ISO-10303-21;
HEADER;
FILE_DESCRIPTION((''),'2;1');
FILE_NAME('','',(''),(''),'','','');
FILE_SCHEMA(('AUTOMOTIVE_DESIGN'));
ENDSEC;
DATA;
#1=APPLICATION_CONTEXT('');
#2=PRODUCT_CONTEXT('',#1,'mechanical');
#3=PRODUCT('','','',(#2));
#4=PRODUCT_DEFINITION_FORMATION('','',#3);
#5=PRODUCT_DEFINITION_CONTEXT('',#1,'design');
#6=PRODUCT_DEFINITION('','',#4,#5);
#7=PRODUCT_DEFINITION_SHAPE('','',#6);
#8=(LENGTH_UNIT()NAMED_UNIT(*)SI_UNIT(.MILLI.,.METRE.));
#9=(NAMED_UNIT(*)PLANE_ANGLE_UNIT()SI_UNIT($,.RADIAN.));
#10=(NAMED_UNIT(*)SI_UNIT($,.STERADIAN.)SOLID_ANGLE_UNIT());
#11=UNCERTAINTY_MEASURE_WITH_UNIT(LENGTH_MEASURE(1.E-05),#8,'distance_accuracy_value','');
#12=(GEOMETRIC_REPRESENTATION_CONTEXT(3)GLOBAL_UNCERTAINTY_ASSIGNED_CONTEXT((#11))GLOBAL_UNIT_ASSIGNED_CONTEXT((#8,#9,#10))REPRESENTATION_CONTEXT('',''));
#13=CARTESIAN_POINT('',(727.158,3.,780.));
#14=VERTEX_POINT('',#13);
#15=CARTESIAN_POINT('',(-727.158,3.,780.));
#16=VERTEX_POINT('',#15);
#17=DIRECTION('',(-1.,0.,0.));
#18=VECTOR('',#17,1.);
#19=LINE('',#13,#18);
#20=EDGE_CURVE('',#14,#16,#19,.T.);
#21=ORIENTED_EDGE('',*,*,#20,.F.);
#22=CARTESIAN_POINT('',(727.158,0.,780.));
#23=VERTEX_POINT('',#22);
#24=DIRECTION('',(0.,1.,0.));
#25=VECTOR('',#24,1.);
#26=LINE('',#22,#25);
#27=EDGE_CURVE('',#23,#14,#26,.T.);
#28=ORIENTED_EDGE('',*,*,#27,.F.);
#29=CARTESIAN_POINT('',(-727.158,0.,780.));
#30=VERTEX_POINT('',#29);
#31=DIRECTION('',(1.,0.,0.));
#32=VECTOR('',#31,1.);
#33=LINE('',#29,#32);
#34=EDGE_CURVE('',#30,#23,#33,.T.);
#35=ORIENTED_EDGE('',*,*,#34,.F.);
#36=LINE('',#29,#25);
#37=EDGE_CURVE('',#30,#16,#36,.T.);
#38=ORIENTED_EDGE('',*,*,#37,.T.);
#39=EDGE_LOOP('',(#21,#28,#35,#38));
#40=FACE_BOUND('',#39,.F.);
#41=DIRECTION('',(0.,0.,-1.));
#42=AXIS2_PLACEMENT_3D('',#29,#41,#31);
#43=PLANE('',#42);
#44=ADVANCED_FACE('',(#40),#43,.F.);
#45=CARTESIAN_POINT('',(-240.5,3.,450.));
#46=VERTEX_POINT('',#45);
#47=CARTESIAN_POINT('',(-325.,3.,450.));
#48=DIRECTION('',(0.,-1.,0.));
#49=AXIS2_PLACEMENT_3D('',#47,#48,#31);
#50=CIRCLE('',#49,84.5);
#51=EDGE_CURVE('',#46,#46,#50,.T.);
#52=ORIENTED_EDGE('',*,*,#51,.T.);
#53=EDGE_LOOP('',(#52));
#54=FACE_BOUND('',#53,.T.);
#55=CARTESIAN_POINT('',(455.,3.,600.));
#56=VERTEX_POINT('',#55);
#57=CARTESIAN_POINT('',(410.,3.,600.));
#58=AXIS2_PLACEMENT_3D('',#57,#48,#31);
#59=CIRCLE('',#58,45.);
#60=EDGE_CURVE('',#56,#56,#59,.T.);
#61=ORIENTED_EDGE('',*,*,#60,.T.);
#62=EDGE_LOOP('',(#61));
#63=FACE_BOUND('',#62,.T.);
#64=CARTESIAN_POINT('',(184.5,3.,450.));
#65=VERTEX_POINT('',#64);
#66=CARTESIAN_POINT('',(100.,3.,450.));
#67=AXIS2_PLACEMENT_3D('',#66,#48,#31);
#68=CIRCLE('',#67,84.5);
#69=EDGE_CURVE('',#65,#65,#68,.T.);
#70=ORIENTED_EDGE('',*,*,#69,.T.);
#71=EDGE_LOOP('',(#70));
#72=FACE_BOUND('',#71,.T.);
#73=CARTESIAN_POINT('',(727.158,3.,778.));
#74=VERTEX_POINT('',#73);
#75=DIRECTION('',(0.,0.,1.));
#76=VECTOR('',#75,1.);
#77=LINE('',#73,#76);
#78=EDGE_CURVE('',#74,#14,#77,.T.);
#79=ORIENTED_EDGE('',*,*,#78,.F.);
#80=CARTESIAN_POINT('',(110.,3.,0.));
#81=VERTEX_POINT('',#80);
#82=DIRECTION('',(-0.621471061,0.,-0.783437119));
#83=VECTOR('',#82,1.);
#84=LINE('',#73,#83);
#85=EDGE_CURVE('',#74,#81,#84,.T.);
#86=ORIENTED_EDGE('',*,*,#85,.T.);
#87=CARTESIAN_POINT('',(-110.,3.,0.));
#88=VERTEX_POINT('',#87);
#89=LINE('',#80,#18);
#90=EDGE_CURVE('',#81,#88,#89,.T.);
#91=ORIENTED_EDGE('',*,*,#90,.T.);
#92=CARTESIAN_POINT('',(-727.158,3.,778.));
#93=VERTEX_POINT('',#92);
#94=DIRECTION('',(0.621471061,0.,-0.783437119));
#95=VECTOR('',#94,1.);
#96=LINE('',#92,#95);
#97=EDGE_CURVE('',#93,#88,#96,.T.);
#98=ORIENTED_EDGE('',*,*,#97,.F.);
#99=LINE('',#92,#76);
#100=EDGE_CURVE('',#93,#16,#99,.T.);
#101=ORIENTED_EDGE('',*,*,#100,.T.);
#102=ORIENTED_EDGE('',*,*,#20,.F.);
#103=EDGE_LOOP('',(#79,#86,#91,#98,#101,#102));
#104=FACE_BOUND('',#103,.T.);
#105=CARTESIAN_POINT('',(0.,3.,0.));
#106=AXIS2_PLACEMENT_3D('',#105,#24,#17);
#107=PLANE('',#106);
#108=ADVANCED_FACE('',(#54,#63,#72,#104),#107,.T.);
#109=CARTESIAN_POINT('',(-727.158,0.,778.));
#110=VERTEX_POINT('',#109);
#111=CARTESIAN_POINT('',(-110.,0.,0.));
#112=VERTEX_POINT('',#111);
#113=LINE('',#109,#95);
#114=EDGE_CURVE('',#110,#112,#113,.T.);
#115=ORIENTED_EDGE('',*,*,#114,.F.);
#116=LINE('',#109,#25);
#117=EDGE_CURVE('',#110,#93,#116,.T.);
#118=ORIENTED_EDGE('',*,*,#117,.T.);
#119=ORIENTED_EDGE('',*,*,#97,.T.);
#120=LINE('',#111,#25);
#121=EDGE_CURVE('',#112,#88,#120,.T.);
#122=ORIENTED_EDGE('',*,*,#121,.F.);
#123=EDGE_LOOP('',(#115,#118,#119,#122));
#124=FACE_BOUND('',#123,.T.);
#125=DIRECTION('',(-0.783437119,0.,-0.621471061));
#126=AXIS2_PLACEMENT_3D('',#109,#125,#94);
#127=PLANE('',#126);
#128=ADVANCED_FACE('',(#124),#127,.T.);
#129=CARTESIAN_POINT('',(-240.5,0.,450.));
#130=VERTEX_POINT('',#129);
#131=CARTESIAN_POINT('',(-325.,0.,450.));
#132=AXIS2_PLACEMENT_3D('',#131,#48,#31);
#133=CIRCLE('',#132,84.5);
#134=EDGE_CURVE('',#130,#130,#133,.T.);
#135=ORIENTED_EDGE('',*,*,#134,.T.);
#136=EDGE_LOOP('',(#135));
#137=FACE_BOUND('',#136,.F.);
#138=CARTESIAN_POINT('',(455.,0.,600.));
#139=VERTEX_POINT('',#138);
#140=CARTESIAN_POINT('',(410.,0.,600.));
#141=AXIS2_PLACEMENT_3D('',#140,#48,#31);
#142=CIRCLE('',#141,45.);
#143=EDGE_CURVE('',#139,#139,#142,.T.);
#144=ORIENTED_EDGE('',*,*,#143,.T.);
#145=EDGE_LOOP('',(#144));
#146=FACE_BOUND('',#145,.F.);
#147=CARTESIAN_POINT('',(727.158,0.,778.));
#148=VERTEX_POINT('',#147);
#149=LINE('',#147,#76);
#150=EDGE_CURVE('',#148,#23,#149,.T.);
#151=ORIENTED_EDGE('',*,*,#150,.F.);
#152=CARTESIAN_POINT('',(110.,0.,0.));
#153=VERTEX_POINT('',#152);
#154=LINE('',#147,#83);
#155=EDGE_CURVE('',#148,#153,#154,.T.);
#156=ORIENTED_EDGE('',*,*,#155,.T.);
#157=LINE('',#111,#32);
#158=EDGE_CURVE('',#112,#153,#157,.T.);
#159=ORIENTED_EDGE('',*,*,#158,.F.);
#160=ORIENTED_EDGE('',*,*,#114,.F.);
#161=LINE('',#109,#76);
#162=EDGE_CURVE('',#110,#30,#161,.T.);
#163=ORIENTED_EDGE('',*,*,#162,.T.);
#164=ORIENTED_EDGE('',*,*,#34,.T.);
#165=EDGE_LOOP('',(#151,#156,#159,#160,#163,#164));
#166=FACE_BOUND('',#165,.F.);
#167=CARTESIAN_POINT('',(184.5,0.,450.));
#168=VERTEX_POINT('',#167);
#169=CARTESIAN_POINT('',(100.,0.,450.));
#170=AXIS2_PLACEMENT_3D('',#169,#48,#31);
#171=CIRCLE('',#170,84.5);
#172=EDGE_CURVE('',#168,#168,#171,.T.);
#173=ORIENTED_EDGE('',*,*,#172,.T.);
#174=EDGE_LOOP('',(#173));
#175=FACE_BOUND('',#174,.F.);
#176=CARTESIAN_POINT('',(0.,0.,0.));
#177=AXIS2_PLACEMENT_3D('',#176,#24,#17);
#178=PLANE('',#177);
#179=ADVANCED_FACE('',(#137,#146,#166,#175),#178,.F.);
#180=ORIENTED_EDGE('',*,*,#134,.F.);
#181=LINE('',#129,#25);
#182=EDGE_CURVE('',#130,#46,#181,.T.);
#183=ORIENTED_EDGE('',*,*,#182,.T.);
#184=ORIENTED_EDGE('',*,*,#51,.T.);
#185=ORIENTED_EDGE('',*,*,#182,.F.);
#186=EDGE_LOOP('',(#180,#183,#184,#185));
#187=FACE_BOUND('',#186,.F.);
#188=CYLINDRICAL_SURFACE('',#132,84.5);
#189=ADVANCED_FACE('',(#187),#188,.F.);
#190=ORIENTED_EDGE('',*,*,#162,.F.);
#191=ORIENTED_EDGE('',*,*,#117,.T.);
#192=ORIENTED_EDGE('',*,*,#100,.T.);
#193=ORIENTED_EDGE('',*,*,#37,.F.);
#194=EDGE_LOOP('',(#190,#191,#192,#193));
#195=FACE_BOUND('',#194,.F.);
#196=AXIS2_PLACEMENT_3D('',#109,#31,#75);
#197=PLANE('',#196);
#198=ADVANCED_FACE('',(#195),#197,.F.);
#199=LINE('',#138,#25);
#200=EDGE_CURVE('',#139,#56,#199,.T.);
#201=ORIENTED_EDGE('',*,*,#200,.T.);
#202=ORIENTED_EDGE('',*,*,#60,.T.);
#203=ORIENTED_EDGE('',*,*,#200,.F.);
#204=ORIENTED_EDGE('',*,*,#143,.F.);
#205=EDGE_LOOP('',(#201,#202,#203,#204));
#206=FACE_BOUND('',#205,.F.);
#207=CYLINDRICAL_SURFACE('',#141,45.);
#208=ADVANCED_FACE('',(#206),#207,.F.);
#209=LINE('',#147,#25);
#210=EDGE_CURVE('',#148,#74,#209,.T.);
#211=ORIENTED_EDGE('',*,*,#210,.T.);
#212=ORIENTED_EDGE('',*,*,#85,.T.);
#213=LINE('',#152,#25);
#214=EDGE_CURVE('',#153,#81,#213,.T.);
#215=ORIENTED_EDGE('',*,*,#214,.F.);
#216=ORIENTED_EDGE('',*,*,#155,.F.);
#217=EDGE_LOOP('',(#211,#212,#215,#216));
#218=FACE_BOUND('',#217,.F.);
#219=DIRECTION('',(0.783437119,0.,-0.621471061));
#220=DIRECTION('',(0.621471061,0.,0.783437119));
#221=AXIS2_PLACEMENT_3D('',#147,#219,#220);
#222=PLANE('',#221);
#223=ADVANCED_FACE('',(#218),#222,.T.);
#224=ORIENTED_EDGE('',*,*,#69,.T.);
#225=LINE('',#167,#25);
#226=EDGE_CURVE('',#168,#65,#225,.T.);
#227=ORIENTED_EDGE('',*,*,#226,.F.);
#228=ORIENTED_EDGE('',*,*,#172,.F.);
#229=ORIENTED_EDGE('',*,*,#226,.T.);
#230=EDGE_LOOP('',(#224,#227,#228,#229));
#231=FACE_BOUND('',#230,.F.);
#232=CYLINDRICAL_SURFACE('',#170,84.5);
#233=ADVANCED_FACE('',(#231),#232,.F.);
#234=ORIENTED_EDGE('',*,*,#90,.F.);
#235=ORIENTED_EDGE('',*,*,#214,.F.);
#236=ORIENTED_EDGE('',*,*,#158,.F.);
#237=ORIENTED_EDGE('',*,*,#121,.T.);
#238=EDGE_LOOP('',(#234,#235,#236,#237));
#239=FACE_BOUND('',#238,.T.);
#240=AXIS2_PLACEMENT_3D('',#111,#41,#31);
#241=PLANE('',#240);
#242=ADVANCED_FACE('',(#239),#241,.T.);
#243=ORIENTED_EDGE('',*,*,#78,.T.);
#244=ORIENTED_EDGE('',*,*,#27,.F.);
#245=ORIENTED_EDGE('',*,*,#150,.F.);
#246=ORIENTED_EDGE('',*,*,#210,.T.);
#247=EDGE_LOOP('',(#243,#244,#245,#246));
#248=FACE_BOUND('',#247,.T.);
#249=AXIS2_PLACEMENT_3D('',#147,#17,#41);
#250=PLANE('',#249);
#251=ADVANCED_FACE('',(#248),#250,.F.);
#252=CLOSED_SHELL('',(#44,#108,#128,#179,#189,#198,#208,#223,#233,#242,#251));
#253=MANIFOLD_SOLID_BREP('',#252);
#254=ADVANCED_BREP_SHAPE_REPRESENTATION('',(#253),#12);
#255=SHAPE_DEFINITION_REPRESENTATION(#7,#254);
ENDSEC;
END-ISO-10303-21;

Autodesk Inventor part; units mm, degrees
ref_plane "YZ Plane" through (0, 0, 0) normal (1, 0, 0) x (0, 1, 0)
ref_plane "XZ Plane" through (0, 0, 0) normal (0, 1, 0) x (-1, 0, 0)
ref_plane "XY Plane" through (0, 0, 0) normal (0, 0, 1) x (1, 0, 0)
sketch "Sketch1" plane through (0, 0, 0) normal (0, 1, 0) x (-1, 0, 0)
  line L0 (0, 780) -> (0, 0)
  line L1 (727.158, 778) -> (727.158, 780)
  line L2 (727.158, 780) -> (0, 780)
  line L3 (727.158, 778) -> (110, 0)
  line L4 (110, 0) -> (0, 0)
  point P0 (0, 678)
  dimension "d1" = 727.158
  dimension "d2" = 2
  dimension "d5" = 128.424
  dimension "d6" = 110
  dimension "d9" = 780
extrude "Plate1" add sketch "Sketch1" along normal blind 3
mirror "Mirror1" about plane through (0, 0, 0) normal (1, 0, 0)
sketch "Sketch2" plane through (0, 0, 0) normal (0, -1, 0) x (1, 0, 0)
  line L0 (-110, 0) -> (110, 0) construction
  line L1 (-110, 0) -> (-727.158, 778) construction
  circle A0 centre (-325, 450) radius 84.5
  line L2 (110, 0) -> (727.158, 778) construction
  circle A1 centre (100, 450) radius 84.5
  circle A2 centre (410, 600) radius 45
  line L3 (-110, 0) -> (110, 0) construction
  line L4 (-240.5, 450) -> (-240.5, 164.5105) construction
  line L5 (365, 600) -> (365, 0) construction
  line L6 (-325, 534.5) -> (365, 534.5) construction
  line L7 (-325, 365.5) -> (365, 365.5) construction
  line L8 (100, 534.5) -> (365, 534.5) construction
  line L9 (410, 555) -> (365, 555) construction
  line L10 (-727.158, 780) -> (727.158, 780) projected
  line L11 (-727.158, 778) -> (-727.158, 780) projected
  line L12 (727.158, 778) -> (727.158, 780) projected
  point P0 (0, 0)
  point P1 (0, 0)
  point P2 (0, 0)
  point P3 (0, 0)
  point P4 (0, 0)
  point P5 (0, 0)
  point P6 (0, 0)
  dimension "d13" = 169
  dimension "d16" = 450
  dimension "d17" = 450
  dimension "d18" = 325
  dimension "d19" = -169
  dimension "d20" = 90
  dimension "d23" = 410
  dimension "d24" = 600
  dimension "d29" = 100
extrude "Extrusion1" cut sketch "Sketch2" against normal through all
sketch "Sketch3" plane through (0, 0, 0) normal (0, -1, 0) x (1, 0, 0)
  line L0 (-53.9958, 701.8167) -> (-53.9958, 713.8167) construction
  line L1 (-53.9958, 713.8167) -> (56.0042, 713.8167) construction
  line L2 (56.0042, 713.8167) -> (56.0042, 701.8167) construction
  line L3 (56.0042, 701.8167) -> (-53.9958, 701.8167) construction
  point P0 (0, 0)
  point P1 (1.0042, 701.8167)
  dimension "d25" = 12
  dimension "d26" = 110
mark "Mark1"
equation "\"d3\" = Thickness"
equation "\"Thickness\" = 3"
properties part number "MSC 701 FACE 1" material "Stainless Steel"
